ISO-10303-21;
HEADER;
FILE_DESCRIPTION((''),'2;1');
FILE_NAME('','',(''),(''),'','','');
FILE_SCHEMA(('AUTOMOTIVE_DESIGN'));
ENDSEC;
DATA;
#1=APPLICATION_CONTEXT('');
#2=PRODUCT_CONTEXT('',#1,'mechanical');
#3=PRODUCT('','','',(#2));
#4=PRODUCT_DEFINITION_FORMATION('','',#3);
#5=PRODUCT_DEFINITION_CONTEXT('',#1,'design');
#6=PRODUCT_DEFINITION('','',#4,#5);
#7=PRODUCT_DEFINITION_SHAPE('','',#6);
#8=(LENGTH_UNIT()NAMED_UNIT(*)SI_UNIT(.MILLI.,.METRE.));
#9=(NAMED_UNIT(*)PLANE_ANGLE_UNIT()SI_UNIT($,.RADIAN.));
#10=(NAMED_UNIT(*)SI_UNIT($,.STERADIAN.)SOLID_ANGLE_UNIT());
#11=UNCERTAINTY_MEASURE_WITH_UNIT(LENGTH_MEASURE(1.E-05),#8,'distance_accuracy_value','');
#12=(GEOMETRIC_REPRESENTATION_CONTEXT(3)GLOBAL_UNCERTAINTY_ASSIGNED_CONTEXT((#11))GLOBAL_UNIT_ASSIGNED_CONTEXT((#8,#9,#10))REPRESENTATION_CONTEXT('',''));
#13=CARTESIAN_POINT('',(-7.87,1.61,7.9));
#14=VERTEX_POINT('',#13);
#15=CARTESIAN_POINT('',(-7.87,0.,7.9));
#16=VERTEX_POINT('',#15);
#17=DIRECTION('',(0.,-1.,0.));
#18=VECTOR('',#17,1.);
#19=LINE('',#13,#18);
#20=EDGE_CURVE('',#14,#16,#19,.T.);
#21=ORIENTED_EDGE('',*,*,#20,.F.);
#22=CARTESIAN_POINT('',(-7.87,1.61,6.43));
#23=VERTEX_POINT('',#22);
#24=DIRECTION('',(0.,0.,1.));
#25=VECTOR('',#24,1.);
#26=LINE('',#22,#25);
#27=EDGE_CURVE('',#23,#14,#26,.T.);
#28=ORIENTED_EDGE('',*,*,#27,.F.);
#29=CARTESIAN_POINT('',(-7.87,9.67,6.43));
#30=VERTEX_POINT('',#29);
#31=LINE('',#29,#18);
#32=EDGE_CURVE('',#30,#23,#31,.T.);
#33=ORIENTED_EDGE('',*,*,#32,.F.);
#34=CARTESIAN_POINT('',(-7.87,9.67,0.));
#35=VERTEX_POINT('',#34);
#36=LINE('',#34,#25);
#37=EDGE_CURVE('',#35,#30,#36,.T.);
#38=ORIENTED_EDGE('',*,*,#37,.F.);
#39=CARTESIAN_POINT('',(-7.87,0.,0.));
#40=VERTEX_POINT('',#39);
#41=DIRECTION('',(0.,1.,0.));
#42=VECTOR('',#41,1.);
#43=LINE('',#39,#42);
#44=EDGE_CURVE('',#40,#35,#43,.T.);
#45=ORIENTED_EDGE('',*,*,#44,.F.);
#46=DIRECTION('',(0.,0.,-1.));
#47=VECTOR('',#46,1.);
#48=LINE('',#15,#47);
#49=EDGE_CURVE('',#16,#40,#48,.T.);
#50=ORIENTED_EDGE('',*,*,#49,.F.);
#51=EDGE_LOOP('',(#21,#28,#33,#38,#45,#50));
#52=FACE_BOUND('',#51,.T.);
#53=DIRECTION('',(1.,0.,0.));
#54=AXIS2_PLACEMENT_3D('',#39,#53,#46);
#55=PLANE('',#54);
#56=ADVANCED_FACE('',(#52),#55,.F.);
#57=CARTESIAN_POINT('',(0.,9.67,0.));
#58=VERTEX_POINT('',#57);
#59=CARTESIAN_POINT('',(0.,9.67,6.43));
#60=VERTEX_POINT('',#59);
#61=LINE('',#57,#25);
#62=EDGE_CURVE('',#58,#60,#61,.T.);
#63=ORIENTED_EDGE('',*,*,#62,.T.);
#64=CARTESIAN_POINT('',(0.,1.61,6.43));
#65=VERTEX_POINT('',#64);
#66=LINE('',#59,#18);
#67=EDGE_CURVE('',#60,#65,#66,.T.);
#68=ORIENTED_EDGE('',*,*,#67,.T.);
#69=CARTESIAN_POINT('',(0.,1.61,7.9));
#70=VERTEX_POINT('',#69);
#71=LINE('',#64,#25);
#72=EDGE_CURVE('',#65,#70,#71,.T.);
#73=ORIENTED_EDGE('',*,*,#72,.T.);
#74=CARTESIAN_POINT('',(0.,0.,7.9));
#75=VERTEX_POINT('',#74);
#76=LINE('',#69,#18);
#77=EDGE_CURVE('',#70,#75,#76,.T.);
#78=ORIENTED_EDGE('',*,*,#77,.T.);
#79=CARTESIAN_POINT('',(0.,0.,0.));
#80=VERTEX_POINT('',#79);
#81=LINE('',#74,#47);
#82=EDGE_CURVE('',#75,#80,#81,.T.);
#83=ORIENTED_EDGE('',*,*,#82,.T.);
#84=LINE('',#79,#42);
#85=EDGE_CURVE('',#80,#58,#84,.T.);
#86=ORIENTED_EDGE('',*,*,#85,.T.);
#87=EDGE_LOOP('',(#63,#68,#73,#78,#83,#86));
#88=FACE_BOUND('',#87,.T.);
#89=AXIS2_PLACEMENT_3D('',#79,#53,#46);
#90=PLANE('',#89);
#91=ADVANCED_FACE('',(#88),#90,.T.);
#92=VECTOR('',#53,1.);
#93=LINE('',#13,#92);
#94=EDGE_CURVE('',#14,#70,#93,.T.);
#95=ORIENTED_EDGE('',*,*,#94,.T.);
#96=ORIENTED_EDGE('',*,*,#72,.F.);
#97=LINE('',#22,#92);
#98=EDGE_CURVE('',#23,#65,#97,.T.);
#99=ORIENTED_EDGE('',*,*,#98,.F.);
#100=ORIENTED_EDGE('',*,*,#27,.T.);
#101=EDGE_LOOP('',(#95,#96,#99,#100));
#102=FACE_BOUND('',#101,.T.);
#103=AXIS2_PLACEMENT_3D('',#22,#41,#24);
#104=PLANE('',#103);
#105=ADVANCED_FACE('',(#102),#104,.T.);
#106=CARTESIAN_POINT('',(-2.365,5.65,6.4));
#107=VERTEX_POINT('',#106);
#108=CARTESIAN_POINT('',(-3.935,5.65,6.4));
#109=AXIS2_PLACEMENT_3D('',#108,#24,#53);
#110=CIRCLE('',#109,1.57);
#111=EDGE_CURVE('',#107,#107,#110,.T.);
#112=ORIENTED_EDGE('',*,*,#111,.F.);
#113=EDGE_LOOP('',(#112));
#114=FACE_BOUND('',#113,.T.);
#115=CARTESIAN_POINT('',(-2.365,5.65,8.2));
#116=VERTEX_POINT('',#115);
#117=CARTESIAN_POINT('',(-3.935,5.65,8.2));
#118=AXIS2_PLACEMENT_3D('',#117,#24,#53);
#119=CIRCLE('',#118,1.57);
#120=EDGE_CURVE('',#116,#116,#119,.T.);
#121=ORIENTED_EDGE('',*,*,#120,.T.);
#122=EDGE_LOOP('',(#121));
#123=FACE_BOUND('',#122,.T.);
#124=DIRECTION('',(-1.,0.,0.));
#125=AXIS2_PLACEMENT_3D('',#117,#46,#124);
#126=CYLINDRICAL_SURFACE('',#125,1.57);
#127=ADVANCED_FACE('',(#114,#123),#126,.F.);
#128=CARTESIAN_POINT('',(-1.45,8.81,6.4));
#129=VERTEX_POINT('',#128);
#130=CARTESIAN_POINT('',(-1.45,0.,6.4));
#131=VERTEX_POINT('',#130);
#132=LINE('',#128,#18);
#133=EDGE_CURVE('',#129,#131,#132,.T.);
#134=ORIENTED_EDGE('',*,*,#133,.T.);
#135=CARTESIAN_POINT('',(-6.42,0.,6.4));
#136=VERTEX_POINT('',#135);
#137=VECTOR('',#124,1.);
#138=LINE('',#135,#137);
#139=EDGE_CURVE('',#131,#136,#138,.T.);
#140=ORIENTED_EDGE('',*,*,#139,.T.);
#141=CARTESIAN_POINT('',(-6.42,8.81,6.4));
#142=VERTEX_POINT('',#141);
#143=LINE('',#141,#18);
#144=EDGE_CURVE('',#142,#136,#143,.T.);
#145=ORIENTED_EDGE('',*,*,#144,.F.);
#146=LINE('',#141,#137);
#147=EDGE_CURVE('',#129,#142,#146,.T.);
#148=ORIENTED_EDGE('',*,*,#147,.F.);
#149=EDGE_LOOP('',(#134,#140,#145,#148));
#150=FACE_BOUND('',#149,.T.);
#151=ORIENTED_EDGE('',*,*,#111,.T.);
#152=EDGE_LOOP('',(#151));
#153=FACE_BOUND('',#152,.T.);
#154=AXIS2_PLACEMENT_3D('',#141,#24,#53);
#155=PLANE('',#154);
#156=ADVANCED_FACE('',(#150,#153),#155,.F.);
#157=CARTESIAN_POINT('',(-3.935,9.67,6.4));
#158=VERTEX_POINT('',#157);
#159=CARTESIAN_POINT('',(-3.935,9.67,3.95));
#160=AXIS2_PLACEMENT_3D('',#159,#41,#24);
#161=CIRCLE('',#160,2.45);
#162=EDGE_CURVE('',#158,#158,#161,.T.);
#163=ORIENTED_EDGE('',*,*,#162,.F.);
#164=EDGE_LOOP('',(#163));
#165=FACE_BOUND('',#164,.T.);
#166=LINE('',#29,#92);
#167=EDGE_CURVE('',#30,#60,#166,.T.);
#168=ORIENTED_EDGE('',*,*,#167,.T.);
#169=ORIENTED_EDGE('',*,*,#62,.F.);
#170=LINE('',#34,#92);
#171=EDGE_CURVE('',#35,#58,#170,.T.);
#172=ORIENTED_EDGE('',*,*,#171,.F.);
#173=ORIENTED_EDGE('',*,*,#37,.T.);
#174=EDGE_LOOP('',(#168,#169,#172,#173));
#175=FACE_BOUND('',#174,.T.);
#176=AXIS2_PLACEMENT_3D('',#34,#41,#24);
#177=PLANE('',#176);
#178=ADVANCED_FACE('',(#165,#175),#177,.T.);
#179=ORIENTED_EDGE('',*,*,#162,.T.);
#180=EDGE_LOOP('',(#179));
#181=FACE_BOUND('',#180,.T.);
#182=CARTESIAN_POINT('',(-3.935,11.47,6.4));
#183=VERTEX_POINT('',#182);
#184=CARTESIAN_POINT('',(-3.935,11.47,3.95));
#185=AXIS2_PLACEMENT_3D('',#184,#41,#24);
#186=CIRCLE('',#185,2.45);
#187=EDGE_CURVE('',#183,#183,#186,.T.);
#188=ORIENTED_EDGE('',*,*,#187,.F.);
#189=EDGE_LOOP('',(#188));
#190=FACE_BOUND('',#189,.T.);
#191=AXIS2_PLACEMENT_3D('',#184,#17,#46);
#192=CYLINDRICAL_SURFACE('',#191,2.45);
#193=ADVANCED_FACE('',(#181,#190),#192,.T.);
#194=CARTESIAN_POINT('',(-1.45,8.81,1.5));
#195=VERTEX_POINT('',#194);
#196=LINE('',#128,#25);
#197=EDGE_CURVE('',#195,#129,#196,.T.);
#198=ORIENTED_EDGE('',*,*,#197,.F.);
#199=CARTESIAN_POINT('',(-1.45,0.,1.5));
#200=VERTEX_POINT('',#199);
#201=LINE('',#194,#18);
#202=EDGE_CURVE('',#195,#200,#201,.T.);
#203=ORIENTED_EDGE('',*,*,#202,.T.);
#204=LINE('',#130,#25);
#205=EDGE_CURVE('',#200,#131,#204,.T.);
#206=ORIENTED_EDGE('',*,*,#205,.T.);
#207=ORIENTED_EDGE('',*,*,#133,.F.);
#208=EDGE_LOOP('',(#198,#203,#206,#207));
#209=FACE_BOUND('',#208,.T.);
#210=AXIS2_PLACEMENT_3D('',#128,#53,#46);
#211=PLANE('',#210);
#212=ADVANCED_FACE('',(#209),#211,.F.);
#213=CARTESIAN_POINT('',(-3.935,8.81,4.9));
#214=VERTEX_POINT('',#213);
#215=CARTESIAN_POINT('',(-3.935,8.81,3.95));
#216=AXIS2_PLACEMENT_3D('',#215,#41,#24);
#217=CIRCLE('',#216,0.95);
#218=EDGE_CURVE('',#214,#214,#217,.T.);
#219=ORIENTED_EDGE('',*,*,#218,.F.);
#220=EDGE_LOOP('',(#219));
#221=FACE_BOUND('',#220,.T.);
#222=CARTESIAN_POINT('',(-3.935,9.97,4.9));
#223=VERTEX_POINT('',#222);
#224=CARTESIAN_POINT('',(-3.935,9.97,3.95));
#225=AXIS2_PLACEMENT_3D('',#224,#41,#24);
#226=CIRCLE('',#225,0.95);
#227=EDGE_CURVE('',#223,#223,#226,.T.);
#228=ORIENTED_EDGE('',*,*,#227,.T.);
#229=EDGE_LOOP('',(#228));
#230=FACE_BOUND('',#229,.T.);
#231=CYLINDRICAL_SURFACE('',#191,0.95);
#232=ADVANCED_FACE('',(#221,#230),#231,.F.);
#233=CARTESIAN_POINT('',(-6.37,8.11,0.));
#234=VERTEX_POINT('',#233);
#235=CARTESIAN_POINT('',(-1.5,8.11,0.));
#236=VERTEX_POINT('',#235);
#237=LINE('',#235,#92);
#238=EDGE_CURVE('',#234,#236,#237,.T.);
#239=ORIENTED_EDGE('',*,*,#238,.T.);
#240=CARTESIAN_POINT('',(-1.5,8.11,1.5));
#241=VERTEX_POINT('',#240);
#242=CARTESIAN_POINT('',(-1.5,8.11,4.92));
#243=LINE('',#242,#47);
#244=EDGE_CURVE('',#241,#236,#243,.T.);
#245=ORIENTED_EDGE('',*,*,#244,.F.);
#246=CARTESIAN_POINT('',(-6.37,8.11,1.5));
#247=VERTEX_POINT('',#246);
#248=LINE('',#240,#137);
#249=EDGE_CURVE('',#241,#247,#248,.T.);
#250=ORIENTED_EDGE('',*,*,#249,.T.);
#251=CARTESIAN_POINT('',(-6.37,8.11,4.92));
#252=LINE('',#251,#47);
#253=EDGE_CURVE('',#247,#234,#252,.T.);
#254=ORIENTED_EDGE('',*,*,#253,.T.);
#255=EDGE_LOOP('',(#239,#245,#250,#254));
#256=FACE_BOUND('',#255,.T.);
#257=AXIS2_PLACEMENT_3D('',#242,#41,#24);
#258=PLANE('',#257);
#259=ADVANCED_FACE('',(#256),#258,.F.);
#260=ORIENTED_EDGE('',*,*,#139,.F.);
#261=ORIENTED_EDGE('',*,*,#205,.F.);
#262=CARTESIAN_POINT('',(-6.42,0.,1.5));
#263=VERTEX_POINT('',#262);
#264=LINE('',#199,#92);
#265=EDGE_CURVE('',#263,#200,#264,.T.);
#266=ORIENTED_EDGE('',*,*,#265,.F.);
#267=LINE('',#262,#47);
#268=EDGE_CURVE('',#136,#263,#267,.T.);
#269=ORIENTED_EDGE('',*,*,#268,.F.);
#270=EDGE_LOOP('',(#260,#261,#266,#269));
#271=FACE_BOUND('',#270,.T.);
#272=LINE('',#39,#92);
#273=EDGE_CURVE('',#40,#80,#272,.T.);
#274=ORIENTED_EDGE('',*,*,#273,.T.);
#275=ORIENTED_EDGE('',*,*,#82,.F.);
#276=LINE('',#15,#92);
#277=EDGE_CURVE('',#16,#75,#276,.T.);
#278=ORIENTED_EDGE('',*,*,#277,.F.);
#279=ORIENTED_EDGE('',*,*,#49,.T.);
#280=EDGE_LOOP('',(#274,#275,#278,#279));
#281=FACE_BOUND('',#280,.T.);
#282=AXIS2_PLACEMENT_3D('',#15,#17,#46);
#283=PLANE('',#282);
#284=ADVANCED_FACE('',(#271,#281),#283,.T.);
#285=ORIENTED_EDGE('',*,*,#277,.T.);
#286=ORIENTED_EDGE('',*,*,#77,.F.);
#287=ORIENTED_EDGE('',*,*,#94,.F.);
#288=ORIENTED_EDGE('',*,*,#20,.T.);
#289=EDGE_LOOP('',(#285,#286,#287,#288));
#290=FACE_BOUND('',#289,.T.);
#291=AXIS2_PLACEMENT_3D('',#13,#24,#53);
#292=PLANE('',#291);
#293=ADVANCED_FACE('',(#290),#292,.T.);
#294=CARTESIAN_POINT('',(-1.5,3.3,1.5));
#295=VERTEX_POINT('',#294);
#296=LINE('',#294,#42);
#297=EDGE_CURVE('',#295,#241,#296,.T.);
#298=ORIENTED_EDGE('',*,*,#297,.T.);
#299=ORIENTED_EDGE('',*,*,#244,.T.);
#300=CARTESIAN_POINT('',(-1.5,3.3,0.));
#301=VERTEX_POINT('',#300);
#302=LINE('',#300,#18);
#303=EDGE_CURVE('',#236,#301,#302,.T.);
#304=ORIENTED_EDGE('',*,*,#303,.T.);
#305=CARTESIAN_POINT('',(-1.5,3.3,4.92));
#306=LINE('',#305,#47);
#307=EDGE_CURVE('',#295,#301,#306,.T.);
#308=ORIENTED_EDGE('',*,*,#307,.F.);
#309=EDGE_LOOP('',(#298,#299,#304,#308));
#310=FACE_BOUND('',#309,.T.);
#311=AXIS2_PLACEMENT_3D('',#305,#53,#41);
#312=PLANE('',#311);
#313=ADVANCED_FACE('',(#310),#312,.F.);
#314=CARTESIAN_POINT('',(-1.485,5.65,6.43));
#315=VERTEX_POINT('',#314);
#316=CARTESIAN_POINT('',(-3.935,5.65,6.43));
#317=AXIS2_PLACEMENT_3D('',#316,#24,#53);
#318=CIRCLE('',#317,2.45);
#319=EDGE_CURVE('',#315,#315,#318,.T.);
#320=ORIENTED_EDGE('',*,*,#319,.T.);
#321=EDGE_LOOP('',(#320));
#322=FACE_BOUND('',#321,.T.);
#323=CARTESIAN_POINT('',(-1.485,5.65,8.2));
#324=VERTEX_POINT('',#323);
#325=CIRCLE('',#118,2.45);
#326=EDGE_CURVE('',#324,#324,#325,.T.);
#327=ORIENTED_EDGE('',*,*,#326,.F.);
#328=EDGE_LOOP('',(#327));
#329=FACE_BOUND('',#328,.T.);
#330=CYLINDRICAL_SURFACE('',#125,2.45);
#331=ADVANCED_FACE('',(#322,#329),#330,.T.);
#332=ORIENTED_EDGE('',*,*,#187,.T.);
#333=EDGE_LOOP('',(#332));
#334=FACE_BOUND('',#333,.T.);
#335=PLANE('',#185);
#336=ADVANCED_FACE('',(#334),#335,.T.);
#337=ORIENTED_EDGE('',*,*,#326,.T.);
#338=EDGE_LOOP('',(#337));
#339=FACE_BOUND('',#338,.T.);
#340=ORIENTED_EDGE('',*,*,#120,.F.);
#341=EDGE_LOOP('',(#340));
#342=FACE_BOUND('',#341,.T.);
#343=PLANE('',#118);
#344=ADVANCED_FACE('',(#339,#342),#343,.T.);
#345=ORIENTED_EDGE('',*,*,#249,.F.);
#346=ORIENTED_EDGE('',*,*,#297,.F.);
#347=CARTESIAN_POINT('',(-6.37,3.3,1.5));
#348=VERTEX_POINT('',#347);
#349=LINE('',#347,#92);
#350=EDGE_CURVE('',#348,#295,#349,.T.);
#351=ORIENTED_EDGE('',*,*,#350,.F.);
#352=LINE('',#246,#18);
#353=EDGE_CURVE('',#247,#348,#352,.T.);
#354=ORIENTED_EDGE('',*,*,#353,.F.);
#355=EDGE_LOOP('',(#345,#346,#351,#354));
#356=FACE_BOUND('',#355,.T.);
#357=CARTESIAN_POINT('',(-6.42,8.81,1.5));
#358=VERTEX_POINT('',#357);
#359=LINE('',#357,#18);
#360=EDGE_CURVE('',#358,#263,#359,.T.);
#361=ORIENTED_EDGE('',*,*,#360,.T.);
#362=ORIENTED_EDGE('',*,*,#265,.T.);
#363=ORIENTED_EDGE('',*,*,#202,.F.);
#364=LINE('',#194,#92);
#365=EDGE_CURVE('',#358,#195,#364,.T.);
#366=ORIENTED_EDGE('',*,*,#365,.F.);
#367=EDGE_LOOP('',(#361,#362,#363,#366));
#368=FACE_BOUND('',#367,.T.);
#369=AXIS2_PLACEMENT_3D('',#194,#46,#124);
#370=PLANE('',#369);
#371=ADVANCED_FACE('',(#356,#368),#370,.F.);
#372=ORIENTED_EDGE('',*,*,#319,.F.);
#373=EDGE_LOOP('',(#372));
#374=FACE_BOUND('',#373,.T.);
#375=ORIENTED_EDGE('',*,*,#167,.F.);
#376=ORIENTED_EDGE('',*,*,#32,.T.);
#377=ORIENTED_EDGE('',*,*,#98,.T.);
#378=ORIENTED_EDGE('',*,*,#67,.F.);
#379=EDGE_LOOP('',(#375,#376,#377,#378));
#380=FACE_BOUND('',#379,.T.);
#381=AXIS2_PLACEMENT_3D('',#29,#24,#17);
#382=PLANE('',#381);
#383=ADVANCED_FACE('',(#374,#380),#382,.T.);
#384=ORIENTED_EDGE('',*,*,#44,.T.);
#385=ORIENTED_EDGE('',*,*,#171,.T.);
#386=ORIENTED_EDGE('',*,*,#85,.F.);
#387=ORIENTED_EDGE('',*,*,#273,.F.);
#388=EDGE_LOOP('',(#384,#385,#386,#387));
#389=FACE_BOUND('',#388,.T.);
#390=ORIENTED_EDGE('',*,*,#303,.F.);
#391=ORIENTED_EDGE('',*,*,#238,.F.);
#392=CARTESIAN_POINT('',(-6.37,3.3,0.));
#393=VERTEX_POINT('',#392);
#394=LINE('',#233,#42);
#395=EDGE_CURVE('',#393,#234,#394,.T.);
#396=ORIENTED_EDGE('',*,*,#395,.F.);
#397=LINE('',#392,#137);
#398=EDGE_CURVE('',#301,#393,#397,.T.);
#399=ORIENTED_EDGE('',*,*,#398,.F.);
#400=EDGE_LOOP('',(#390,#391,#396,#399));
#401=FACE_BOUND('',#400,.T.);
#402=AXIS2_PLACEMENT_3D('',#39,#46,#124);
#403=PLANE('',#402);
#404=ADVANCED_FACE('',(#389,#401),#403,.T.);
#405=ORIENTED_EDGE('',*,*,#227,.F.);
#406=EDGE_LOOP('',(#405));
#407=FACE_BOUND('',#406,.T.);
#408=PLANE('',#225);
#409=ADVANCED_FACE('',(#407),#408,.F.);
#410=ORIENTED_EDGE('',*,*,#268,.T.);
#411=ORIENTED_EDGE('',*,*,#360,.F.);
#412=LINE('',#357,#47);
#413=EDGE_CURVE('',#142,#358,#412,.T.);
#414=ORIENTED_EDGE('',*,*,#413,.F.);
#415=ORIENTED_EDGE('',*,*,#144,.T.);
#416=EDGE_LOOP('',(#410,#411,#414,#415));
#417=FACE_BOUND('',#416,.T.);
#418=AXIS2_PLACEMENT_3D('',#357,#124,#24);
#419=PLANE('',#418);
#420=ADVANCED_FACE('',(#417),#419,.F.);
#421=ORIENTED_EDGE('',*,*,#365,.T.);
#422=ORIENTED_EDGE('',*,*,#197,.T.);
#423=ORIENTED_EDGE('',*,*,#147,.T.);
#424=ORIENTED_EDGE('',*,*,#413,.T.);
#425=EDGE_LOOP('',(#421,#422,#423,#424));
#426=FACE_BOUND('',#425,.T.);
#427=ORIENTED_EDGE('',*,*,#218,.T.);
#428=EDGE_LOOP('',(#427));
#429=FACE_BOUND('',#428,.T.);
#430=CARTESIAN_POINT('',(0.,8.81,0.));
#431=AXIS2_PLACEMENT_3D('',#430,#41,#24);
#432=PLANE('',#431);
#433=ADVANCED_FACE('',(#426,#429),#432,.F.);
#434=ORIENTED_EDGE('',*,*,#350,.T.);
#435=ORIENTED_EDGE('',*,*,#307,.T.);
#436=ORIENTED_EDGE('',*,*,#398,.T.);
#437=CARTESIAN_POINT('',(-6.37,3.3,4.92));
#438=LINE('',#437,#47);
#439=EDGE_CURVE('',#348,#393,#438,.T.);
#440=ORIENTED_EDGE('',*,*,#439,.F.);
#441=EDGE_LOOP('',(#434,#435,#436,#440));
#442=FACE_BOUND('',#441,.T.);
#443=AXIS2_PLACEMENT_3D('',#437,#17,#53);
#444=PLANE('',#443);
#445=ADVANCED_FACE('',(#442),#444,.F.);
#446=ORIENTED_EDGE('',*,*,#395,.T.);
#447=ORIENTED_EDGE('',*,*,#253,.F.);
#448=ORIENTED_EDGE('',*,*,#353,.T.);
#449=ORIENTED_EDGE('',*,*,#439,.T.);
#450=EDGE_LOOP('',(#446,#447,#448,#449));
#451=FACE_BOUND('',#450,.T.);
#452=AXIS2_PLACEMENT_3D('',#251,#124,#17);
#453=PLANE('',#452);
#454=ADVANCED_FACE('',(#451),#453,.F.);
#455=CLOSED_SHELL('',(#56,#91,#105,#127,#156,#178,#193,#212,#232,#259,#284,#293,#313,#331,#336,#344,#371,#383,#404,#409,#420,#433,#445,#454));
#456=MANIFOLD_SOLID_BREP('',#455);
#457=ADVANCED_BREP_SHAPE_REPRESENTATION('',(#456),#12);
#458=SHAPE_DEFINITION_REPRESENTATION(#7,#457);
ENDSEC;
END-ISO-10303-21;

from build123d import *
from build123d.topology import SkipClean

# Parameters (mm, degrees)
BOSS_EXTRUDE1_DEPTH = 7.87
SKETCH2_R           = 2.45
BOSS_EXTRUDE2_DEPTH = 1.8
SKETCH3_R           = 2.45
SKETCH3_R_2         = 1.57
BOSS_EXTRUDE3_DEPTH = 1.77
SKETCH4_R           = 1.57
CUT_EXTRUDE1_DEPTH  = 16.324578298
SKETCH5_W           = 4.87
SKETCH5_H           = 4.81
CUT_EXTRUDE2_DEPTH  = 4.92
SKETCH6_W           = 4.97
SKETCH6_H           = 4.9
CUT_EXTRUDE3_DEPTH  = 8.81
SHELL1_START        = 8.81
SHELL1_OUTLINE_R    = 0.95
SHELL1_DEPTH        = 1.16


# Read off the part's stored shape, not the designer's step: Shell1
with BuildPart() as part:
    # Sketch1 → Boss-Extrude1 (new body)
    with BuildSketch(Plane(origin=(0, 0, 0), x_dir=(0, 0, -1), z_dir=(1, 0, 0))):
        Polygon((0, 0), (0, 9.67), (-6.43, 9.67), (-6.43, 1.61), (-7.9, 1.61), (-7.9, 0), align=None)
    extrude(amount=-BOSS_EXTRUDE1_DEPTH)

    # Sketch2 → Boss-Extrude2 (add)
    with BuildSketch(Plane(origin=(0, 9.67, 0), x_dir=(1, 0, 0), z_dir=(0, 1, 0))):
        with Locations(Location((-3.935, -3.95, 0), (0, 0, 270))):
            Circle(SKETCH2_R)
    extrude(amount=BOSS_EXTRUDE2_DEPTH)

    # Sketch3 → Boss-Extrude3 (add)
    with BuildSketch(Plane.XY.offset(6.43)):
        with Locations((-3.935, 5.65)):
            Circle(SKETCH3_R)
        with Locations(Location((-3.935, 5.65, 0), (0, 0, 270))):
            Circle(SKETCH3_R_2, mode=Mode.SUBTRACT)
    extrude(amount=BOSS_EXTRUDE3_DEPTH)

    # Sketch4 → Cut-Extrude1 (cut, through all)
    with SkipClean():  # the faces are left unmerged after this step: merging them gives an invalid solid
        with BuildSketch(Plane.XY.offset(6.43)):
            with Locations((-3.935, 5.65)):
                Circle(SKETCH4_R)
        extrude(amount=-CUT_EXTRUDE1_DEPTH, mode=Mode.SUBTRACT)

    # Sketch5 → Cut-Extrude2 (cut)
    with SkipClean():  # the faces are left unmerged after this step: merging them gives an invalid solid
        with BuildSketch(Plane(origin=(0, 0, 0), x_dir=(-1, 0, 0), z_dir=(0, 0, -1))):
            with Locations((3.935, 5.705)):
                Rectangle(SKETCH5_W, SKETCH5_H)
        extrude(amount=-CUT_EXTRUDE2_DEPTH, mode=Mode.SUBTRACT)

    # Sketch6 → Cut-Extrude3 (cut)
    with SkipClean():  # the faces are left unmerged after this step: merging them gives an invalid solid
        with BuildSketch(Plane.XZ):
            with Locations((-3.935, 3.95)):
                Rectangle(SKETCH6_W, SKETCH6_H)
        extrude(amount=-CUT_EXTRUDE3_DEPTH, mode=Mode.SUBTRACT)

    # Shell1 outline → Shell1 (cut)
    with SkipClean():  # the faces are left unmerged after this step: merging them gives an invalid solid
        with BuildSketch(Plane(origin=(0, 0, 0), x_dir=(1, 0, 0), z_dir=(0, 1, 0)).offset(SHELL1_START)):
            with Locations((-3.935, -3.95)):
                Circle(SHELL1_OUTLINE_R)
        extrude(amount=SHELL1_DEPTH, mode=Mode.SUBTRACT)


solid = part.part
